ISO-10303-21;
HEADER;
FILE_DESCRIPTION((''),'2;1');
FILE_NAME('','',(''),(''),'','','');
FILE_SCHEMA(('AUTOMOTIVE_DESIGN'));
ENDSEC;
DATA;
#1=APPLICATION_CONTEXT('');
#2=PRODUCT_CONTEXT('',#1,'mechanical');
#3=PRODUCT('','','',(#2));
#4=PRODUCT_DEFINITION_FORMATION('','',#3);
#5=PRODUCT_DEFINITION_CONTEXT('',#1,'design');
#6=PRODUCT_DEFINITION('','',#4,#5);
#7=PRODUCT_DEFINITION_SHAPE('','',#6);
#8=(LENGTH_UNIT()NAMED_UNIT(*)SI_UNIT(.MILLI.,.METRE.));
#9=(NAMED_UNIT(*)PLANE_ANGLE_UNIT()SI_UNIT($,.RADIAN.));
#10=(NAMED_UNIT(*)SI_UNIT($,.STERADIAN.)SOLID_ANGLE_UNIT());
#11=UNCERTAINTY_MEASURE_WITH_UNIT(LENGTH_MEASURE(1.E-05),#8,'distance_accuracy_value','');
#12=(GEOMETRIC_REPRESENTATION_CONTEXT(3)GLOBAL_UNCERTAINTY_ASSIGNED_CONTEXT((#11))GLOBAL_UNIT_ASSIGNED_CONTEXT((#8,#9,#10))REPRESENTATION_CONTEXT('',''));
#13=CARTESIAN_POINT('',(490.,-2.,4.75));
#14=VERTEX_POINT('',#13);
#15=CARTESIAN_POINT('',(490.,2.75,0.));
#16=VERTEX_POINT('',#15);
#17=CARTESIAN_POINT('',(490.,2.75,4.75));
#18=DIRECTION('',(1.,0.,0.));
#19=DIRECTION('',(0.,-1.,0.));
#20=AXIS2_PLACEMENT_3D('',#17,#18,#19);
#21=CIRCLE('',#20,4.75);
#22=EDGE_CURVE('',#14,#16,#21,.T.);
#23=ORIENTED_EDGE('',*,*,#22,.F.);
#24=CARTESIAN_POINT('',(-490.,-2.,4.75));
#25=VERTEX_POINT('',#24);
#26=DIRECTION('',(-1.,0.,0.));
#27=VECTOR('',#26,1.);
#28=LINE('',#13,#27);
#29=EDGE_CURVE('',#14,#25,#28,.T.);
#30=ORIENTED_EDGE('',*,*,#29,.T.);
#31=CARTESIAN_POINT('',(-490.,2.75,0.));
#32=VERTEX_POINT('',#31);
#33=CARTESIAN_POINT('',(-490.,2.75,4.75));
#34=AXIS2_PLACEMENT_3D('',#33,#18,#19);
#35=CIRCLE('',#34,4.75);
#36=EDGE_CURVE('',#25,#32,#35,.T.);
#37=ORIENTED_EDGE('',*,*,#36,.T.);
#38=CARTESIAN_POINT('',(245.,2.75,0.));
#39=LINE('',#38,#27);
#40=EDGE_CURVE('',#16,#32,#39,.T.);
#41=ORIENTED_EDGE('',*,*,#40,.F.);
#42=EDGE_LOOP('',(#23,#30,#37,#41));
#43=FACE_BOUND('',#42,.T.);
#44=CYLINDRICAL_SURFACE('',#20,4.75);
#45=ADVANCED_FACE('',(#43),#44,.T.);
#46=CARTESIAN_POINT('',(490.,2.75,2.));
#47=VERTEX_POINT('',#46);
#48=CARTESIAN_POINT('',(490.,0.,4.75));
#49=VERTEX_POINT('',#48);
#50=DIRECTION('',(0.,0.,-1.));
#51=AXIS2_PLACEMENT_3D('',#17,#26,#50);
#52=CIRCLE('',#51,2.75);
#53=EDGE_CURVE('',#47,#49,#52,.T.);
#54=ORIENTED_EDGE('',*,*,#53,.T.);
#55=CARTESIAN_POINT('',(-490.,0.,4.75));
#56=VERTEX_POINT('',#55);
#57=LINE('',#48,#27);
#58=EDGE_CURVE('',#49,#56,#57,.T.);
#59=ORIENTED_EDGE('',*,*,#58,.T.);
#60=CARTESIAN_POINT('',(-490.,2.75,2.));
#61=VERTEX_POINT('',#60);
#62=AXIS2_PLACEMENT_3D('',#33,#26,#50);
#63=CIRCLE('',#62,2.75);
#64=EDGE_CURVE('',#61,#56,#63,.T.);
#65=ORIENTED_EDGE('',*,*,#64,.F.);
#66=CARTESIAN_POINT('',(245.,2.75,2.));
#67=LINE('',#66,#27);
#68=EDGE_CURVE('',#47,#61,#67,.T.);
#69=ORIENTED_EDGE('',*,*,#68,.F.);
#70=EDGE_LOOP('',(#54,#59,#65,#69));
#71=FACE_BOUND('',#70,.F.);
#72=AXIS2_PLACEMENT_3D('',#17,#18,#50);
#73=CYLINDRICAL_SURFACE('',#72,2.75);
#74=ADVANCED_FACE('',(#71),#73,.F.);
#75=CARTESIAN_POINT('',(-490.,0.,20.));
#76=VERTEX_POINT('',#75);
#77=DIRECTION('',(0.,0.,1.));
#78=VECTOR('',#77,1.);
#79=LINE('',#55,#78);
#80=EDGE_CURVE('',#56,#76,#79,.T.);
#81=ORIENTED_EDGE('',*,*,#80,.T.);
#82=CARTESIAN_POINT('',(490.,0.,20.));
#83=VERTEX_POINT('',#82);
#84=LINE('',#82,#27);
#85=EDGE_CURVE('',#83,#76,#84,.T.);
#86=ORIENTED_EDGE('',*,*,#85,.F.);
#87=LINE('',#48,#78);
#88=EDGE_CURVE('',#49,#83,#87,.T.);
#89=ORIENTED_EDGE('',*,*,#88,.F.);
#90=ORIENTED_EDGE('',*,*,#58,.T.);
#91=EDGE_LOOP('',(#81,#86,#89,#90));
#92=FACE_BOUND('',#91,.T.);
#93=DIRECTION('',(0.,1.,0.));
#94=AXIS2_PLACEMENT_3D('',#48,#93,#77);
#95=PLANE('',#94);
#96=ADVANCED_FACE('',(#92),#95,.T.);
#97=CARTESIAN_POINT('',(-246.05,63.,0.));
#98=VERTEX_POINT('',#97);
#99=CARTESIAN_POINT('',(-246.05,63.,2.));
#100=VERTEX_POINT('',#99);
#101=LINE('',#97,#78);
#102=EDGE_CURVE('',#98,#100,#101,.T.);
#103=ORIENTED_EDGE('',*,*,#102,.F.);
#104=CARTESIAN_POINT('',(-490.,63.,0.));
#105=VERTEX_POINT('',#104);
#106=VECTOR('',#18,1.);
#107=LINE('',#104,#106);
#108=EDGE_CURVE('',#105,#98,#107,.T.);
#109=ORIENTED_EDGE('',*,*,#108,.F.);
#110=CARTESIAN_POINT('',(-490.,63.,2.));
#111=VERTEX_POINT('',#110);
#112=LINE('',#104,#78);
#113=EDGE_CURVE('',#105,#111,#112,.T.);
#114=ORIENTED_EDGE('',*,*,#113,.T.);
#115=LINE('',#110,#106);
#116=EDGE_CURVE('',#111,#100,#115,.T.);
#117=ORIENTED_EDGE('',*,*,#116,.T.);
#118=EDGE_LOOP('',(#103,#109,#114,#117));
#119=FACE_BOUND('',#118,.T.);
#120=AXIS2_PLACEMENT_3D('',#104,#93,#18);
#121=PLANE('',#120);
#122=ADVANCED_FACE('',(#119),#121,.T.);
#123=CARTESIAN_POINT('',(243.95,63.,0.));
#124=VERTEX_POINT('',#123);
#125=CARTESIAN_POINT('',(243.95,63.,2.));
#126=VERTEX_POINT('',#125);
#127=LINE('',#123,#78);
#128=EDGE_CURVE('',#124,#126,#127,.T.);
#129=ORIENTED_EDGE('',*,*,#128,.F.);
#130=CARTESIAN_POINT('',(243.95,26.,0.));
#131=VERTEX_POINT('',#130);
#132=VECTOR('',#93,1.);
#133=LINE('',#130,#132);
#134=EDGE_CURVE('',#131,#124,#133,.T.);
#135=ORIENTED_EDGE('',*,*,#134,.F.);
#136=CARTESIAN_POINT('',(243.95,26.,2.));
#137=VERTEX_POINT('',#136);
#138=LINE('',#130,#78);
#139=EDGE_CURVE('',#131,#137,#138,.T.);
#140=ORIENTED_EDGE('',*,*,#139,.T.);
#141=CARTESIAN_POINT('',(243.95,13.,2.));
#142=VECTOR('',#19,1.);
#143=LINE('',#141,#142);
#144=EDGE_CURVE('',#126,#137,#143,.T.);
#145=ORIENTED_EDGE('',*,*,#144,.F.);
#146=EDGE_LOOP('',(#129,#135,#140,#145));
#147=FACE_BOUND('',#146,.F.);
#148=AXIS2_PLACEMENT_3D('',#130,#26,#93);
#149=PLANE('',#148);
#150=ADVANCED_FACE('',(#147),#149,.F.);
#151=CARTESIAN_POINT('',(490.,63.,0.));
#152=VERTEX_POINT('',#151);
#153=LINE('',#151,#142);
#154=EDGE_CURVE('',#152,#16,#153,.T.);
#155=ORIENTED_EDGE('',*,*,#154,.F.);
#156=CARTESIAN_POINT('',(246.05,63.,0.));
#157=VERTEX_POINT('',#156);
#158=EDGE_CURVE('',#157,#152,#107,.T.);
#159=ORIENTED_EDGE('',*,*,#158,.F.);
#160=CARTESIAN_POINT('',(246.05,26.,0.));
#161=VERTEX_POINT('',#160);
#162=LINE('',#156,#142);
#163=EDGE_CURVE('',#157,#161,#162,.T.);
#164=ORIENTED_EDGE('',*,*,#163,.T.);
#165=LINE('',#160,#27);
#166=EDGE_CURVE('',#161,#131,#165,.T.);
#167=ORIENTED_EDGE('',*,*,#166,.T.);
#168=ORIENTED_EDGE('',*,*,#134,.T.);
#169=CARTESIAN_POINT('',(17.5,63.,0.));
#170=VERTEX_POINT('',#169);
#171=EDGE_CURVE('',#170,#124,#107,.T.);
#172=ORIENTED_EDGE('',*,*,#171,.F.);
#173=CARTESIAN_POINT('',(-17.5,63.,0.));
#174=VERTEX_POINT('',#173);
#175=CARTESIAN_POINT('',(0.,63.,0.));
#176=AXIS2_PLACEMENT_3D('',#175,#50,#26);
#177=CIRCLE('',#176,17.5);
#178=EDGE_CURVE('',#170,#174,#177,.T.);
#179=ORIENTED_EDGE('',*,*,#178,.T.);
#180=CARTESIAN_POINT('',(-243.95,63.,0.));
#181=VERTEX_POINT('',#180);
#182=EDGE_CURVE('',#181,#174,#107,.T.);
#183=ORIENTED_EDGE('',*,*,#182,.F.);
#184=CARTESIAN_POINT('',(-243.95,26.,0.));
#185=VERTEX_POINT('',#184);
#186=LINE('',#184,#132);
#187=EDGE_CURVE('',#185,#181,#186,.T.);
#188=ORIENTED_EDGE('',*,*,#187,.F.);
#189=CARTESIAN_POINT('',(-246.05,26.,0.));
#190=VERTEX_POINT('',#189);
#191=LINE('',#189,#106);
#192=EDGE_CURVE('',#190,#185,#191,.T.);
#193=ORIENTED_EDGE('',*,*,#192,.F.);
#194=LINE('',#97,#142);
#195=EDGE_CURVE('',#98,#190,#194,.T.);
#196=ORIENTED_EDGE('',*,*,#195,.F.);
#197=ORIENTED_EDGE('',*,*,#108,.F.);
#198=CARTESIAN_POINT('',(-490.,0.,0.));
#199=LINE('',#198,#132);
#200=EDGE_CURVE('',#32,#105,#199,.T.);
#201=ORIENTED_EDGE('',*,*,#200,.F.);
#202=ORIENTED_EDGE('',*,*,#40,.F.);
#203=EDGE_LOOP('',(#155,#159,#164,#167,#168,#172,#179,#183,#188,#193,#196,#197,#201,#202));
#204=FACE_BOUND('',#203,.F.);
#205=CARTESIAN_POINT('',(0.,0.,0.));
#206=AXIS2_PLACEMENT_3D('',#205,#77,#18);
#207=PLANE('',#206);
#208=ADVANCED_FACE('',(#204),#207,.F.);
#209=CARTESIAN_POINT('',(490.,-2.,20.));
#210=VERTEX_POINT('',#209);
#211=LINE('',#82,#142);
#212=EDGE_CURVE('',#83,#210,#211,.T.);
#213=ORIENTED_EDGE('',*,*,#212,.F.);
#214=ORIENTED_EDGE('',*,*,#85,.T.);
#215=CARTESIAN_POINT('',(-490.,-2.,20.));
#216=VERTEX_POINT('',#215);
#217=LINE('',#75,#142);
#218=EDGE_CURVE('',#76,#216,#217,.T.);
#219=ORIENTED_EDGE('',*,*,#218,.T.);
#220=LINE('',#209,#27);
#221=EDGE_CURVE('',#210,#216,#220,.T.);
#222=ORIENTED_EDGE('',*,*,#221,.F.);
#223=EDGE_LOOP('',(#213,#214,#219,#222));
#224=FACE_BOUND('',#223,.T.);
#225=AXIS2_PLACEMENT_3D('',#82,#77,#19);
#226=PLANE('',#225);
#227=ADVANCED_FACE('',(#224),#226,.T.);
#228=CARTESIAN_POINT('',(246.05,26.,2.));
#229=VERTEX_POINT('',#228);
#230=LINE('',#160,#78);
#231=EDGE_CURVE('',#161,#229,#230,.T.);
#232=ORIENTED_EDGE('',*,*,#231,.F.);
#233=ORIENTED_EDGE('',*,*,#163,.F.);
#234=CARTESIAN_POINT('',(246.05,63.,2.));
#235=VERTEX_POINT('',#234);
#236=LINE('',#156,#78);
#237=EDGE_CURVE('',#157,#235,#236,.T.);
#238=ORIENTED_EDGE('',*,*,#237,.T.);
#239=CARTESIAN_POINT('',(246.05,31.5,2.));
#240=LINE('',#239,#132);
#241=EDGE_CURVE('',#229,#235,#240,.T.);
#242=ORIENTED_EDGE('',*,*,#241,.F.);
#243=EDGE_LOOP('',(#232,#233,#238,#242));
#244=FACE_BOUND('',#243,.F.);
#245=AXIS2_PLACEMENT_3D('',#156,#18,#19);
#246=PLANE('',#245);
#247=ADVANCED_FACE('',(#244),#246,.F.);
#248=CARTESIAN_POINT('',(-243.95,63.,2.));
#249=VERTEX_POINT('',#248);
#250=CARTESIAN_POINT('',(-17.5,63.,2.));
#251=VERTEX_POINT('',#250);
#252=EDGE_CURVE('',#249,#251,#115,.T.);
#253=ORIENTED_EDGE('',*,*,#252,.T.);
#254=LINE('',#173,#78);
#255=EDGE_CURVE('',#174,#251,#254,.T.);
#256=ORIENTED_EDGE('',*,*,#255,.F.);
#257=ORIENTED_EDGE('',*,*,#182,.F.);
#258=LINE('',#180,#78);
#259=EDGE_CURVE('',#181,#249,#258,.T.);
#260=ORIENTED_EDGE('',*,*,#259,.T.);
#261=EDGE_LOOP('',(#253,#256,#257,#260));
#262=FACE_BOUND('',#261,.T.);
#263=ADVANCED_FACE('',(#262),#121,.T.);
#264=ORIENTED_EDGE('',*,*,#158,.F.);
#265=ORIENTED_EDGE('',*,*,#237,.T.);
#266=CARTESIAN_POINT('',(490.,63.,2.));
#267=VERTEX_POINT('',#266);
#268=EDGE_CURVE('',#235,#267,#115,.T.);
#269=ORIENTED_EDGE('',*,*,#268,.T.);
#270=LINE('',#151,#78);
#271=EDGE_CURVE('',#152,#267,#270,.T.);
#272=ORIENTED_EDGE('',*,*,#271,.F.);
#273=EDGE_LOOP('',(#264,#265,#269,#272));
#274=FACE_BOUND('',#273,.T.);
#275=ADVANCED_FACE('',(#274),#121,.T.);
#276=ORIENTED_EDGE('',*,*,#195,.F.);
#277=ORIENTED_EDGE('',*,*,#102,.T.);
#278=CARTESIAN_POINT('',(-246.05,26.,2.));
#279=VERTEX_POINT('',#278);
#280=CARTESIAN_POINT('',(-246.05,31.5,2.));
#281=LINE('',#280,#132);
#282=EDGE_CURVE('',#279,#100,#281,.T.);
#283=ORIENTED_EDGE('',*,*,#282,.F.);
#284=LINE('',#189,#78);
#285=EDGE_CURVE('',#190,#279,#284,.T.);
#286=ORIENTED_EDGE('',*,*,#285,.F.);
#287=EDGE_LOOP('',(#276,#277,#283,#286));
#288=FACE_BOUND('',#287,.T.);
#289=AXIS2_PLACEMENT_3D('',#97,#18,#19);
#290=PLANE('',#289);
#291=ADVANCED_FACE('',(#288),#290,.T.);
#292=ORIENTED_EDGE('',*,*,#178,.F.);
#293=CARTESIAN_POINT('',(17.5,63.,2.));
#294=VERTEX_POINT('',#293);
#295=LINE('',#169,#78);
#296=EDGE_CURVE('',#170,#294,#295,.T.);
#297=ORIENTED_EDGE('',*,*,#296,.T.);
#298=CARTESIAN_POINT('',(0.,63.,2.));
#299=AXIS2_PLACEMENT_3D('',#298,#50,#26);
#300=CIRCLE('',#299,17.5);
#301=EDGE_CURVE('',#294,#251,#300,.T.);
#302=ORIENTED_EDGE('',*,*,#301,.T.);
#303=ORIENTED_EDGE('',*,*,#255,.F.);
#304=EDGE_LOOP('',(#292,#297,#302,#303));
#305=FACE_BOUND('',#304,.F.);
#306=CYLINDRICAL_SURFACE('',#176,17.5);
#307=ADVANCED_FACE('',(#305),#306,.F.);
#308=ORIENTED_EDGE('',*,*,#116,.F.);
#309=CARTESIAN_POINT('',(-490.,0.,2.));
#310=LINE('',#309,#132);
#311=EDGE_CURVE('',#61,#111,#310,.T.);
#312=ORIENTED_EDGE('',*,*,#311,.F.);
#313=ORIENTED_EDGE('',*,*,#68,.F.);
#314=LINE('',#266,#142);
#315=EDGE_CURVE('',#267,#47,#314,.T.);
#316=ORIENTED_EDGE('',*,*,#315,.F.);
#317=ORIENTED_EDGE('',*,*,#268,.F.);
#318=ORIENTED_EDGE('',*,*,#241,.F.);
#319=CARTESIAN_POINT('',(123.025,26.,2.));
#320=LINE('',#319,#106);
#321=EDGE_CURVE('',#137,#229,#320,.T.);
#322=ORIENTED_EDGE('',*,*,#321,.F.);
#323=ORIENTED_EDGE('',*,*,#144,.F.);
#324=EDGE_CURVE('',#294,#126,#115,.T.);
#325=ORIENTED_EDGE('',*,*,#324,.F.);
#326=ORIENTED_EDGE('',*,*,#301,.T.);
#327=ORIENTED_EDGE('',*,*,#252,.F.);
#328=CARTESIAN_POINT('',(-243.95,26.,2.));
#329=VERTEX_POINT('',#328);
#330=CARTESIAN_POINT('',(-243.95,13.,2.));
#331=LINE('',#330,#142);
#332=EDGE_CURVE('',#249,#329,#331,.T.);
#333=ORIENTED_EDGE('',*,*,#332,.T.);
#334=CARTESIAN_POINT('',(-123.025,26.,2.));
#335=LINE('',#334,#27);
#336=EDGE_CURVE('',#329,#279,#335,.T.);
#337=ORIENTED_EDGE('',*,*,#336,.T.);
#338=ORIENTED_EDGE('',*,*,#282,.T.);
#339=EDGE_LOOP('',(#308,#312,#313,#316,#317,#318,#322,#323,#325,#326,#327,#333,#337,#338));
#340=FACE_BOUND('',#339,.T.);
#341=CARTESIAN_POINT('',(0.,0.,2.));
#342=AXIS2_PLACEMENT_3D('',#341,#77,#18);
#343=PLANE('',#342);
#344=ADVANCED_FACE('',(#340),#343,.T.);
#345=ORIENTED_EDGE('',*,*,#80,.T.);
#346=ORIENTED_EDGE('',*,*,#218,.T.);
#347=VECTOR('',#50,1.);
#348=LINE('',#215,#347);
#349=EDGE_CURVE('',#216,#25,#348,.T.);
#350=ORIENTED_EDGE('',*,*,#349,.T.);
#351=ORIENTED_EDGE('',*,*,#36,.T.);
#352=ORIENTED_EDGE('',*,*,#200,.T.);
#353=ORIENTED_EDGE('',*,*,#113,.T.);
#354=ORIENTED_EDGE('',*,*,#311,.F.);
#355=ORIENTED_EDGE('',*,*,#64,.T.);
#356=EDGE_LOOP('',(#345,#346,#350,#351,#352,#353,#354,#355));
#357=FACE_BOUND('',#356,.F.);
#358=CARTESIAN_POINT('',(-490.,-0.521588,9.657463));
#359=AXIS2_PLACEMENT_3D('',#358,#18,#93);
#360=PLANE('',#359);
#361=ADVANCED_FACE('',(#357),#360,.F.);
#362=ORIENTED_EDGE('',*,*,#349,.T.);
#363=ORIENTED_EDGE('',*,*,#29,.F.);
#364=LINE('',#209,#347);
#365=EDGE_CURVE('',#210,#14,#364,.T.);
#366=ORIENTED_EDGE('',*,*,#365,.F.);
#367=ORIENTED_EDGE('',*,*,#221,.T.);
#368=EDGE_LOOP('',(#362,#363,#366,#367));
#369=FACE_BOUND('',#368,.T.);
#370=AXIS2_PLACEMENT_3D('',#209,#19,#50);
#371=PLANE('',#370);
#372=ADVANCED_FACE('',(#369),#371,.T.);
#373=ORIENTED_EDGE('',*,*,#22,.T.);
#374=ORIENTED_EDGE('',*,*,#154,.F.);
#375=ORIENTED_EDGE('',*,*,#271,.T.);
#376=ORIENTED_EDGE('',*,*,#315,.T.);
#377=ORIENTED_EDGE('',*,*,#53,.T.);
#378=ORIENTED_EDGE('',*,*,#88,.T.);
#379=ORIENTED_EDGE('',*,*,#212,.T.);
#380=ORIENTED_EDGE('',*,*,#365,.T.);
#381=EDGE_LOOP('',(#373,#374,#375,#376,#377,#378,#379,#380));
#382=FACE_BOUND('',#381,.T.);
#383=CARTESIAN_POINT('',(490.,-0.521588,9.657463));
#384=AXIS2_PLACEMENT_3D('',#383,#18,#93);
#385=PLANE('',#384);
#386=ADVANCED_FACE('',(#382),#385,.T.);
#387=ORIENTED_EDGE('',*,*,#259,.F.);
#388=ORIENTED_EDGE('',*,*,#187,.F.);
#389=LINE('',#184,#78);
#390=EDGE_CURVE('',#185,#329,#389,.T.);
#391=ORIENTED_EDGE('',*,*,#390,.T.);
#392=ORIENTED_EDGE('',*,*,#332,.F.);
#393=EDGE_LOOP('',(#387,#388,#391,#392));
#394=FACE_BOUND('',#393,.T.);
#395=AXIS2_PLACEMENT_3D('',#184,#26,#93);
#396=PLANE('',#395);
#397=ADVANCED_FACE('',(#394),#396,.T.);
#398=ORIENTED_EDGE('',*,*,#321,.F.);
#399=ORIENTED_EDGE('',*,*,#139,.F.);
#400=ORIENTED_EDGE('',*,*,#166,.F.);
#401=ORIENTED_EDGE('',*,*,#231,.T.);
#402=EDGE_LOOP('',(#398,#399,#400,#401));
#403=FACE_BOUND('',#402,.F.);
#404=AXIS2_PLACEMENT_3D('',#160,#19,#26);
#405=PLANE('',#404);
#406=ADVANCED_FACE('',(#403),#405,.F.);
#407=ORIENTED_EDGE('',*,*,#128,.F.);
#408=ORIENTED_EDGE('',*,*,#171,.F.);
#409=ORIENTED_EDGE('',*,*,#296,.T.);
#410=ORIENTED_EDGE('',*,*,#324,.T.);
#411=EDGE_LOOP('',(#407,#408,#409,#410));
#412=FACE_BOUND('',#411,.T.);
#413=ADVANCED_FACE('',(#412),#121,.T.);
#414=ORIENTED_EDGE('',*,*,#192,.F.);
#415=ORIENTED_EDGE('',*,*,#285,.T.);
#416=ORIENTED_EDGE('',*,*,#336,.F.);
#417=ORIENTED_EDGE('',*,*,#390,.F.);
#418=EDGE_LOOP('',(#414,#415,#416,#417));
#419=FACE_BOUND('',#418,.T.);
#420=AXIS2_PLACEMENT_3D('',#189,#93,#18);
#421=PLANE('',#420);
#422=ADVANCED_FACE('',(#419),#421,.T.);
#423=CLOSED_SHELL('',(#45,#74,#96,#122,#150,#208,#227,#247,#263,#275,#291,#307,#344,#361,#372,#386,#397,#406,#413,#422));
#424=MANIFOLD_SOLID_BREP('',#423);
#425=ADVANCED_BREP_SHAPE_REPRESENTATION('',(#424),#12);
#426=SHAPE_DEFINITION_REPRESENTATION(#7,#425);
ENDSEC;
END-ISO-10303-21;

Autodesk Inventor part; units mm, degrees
ref_plane "YZ Plane" through (0, 0, 0) normal (1, 0, 0) x (0, 1, 0)
ref_plane "XZ Plane" through (0, 0, 0) normal (0, 1, 0) x (-1, 0, 0)
ref_plane "XY Plane" through (0, 0, 0) normal (0, 0, 1) x (1, 0, 0)
sketch "Sketch1" plane through (0, 0, 0) normal (0, 0, 1) x (1, 0, 0)
  line L0 (-490, 63) -> (490, 63)
  line L1 (490, 63) -> (490, 0)
  line L2 (490, 0) -> (-490, 0)
  line L3 (-490, 0) -> (-490, 63)
  point P0 (0, 0)
  point P1 (0, 0)
  dimension "d0" = 980
  dimension "d1" = 63
extrude "Plate1" add sketch "Sketch1" along normal blind 2
sketch "Sketch2" plane through (490, -2, 0) normal (0, 1, 0) x (-1, 0, 0)
  line L0 (980, 0) -> (0, 0)
  line L1 (0, 0) -> (0, 20)
  line L2 (0, 20) -> (980, 20)
  line L3 (980, 20) -> (980, 0)
edge flange "Flange1" height 20 angle 90 thickness 2 bend radius 2.75 thickness toward (0, 1, 0) relief round relief width 2 relief depth 1 edges at (0, 0, 2) wall of the first edge with corners at (-490, -2, 0) (490, -2, 0) (490, -2, 20) (-490, -2, 20)
bend "Bend1"
corner "Corner1"
sketch "Sketch5" plane through (0, 0, 0) normal (0, 0, -1) x (-1, 0, 0)
  line L0 (490, 63) -> (-490, 63) projected
  line L1 (490, -2) -> (-490, -2) projected
  circle A0 centre (0, 63) radius 17.5
  line L2 (243.95, 63) -> (246.05, 63)
  line L3 (246.05, 63) -> (246.05, 26)
  line L4 (246.05, 26) -> (243.95, 26)
  line L5 (243.95, 26) -> (243.95, 63)
  line L6 (-243.95, 63) -> (-246.05, 63)
  line L7 (-246.05, 63) -> (-246.05, 26)
  line L8 (-246.05, 26) -> (-243.95, 26)
  line L9 (-243.95, 26) -> (-243.95, 63)
  line L10 (0, 63) -> (0, -2) construction
  point P0 (0, 0)
  point P1 (-490, -2)
  point P2 (245, 26)
  point P3 (-245, 26)
  point P4 (246.05, 63)
  point P5 (-17.5, 63)
  point P6 (17.5, 63)
  point P7 (-246.05, 63)
  dimension "d45" = 35
  dimension "d48" = 2.1
  dimension "d49" = 490
  dimension "d51" = 28
  dimension "d52" = 37
extrude "Extrusion1" cut sketch "Sketch5" against normal through all contours L3 L4 L5 L0 | L9 L8 L7 L0 | A0 L0 picked at (-2.238, 56.1497)
sketch "Sketch9" plane through (0, 0, 2) normal (0, 0, 1) x (1, 0, 0)
  line L0 (485.6141, 29.596) -> (485.6141, 17.596) construction
  line L1 (485.6141, 17.596) -> (285.6141, 17.596) construction
  line L2 (285.6141, 17.596) -> (285.6141, 29.596) construction
  line L3 (285.6141, 29.596) -> (485.6141, 29.596) construction
  line L4 (-490, 63) -> (490, 63) projected
  point P0 (0, 0)
  point P1 (1.05, 68)
  point P2 (490, 63)
  dimension "d40" = 200
  dimension "d41" = 12
mark "Mark2"
equation "\"d2\" = Thickness"
equation "\"d3\" = BendReliefWidth"
equation "\"d4\" = BendReliefDepth"
equation "\"d5\" = MinimumRemnant"
equation "\"d6\" = TransitionRadius"
equation "\"d9\" = BendRadius"
equation "\"d10\" = CornerReliefSize"
equation "\"d11\" = GapSize"
equation "\"d12\" = JacobiRadiusSize"
equation "\"BendReliefWidth\" = Thickness"
equation "\"BendReliefDepth\" = 0.5 * Thickness"
equation "\"CornerReliefSize\" = 4 * Thickness"
equation "\"MinimumRemnant\" = 2 * Thickness"
equation "\"TransitionRadius\" = BendRadius"
equation "\"JacobiRadiusSize\" = BendRadius"
equation "\"GapSize\" = Thickness"
equation "\"Thickness\" = 2"
equation "\"BendRadius\" = 2.75"
properties part number "MSC 322 STRINGER BOARD  #" material "Stainless Steel"
